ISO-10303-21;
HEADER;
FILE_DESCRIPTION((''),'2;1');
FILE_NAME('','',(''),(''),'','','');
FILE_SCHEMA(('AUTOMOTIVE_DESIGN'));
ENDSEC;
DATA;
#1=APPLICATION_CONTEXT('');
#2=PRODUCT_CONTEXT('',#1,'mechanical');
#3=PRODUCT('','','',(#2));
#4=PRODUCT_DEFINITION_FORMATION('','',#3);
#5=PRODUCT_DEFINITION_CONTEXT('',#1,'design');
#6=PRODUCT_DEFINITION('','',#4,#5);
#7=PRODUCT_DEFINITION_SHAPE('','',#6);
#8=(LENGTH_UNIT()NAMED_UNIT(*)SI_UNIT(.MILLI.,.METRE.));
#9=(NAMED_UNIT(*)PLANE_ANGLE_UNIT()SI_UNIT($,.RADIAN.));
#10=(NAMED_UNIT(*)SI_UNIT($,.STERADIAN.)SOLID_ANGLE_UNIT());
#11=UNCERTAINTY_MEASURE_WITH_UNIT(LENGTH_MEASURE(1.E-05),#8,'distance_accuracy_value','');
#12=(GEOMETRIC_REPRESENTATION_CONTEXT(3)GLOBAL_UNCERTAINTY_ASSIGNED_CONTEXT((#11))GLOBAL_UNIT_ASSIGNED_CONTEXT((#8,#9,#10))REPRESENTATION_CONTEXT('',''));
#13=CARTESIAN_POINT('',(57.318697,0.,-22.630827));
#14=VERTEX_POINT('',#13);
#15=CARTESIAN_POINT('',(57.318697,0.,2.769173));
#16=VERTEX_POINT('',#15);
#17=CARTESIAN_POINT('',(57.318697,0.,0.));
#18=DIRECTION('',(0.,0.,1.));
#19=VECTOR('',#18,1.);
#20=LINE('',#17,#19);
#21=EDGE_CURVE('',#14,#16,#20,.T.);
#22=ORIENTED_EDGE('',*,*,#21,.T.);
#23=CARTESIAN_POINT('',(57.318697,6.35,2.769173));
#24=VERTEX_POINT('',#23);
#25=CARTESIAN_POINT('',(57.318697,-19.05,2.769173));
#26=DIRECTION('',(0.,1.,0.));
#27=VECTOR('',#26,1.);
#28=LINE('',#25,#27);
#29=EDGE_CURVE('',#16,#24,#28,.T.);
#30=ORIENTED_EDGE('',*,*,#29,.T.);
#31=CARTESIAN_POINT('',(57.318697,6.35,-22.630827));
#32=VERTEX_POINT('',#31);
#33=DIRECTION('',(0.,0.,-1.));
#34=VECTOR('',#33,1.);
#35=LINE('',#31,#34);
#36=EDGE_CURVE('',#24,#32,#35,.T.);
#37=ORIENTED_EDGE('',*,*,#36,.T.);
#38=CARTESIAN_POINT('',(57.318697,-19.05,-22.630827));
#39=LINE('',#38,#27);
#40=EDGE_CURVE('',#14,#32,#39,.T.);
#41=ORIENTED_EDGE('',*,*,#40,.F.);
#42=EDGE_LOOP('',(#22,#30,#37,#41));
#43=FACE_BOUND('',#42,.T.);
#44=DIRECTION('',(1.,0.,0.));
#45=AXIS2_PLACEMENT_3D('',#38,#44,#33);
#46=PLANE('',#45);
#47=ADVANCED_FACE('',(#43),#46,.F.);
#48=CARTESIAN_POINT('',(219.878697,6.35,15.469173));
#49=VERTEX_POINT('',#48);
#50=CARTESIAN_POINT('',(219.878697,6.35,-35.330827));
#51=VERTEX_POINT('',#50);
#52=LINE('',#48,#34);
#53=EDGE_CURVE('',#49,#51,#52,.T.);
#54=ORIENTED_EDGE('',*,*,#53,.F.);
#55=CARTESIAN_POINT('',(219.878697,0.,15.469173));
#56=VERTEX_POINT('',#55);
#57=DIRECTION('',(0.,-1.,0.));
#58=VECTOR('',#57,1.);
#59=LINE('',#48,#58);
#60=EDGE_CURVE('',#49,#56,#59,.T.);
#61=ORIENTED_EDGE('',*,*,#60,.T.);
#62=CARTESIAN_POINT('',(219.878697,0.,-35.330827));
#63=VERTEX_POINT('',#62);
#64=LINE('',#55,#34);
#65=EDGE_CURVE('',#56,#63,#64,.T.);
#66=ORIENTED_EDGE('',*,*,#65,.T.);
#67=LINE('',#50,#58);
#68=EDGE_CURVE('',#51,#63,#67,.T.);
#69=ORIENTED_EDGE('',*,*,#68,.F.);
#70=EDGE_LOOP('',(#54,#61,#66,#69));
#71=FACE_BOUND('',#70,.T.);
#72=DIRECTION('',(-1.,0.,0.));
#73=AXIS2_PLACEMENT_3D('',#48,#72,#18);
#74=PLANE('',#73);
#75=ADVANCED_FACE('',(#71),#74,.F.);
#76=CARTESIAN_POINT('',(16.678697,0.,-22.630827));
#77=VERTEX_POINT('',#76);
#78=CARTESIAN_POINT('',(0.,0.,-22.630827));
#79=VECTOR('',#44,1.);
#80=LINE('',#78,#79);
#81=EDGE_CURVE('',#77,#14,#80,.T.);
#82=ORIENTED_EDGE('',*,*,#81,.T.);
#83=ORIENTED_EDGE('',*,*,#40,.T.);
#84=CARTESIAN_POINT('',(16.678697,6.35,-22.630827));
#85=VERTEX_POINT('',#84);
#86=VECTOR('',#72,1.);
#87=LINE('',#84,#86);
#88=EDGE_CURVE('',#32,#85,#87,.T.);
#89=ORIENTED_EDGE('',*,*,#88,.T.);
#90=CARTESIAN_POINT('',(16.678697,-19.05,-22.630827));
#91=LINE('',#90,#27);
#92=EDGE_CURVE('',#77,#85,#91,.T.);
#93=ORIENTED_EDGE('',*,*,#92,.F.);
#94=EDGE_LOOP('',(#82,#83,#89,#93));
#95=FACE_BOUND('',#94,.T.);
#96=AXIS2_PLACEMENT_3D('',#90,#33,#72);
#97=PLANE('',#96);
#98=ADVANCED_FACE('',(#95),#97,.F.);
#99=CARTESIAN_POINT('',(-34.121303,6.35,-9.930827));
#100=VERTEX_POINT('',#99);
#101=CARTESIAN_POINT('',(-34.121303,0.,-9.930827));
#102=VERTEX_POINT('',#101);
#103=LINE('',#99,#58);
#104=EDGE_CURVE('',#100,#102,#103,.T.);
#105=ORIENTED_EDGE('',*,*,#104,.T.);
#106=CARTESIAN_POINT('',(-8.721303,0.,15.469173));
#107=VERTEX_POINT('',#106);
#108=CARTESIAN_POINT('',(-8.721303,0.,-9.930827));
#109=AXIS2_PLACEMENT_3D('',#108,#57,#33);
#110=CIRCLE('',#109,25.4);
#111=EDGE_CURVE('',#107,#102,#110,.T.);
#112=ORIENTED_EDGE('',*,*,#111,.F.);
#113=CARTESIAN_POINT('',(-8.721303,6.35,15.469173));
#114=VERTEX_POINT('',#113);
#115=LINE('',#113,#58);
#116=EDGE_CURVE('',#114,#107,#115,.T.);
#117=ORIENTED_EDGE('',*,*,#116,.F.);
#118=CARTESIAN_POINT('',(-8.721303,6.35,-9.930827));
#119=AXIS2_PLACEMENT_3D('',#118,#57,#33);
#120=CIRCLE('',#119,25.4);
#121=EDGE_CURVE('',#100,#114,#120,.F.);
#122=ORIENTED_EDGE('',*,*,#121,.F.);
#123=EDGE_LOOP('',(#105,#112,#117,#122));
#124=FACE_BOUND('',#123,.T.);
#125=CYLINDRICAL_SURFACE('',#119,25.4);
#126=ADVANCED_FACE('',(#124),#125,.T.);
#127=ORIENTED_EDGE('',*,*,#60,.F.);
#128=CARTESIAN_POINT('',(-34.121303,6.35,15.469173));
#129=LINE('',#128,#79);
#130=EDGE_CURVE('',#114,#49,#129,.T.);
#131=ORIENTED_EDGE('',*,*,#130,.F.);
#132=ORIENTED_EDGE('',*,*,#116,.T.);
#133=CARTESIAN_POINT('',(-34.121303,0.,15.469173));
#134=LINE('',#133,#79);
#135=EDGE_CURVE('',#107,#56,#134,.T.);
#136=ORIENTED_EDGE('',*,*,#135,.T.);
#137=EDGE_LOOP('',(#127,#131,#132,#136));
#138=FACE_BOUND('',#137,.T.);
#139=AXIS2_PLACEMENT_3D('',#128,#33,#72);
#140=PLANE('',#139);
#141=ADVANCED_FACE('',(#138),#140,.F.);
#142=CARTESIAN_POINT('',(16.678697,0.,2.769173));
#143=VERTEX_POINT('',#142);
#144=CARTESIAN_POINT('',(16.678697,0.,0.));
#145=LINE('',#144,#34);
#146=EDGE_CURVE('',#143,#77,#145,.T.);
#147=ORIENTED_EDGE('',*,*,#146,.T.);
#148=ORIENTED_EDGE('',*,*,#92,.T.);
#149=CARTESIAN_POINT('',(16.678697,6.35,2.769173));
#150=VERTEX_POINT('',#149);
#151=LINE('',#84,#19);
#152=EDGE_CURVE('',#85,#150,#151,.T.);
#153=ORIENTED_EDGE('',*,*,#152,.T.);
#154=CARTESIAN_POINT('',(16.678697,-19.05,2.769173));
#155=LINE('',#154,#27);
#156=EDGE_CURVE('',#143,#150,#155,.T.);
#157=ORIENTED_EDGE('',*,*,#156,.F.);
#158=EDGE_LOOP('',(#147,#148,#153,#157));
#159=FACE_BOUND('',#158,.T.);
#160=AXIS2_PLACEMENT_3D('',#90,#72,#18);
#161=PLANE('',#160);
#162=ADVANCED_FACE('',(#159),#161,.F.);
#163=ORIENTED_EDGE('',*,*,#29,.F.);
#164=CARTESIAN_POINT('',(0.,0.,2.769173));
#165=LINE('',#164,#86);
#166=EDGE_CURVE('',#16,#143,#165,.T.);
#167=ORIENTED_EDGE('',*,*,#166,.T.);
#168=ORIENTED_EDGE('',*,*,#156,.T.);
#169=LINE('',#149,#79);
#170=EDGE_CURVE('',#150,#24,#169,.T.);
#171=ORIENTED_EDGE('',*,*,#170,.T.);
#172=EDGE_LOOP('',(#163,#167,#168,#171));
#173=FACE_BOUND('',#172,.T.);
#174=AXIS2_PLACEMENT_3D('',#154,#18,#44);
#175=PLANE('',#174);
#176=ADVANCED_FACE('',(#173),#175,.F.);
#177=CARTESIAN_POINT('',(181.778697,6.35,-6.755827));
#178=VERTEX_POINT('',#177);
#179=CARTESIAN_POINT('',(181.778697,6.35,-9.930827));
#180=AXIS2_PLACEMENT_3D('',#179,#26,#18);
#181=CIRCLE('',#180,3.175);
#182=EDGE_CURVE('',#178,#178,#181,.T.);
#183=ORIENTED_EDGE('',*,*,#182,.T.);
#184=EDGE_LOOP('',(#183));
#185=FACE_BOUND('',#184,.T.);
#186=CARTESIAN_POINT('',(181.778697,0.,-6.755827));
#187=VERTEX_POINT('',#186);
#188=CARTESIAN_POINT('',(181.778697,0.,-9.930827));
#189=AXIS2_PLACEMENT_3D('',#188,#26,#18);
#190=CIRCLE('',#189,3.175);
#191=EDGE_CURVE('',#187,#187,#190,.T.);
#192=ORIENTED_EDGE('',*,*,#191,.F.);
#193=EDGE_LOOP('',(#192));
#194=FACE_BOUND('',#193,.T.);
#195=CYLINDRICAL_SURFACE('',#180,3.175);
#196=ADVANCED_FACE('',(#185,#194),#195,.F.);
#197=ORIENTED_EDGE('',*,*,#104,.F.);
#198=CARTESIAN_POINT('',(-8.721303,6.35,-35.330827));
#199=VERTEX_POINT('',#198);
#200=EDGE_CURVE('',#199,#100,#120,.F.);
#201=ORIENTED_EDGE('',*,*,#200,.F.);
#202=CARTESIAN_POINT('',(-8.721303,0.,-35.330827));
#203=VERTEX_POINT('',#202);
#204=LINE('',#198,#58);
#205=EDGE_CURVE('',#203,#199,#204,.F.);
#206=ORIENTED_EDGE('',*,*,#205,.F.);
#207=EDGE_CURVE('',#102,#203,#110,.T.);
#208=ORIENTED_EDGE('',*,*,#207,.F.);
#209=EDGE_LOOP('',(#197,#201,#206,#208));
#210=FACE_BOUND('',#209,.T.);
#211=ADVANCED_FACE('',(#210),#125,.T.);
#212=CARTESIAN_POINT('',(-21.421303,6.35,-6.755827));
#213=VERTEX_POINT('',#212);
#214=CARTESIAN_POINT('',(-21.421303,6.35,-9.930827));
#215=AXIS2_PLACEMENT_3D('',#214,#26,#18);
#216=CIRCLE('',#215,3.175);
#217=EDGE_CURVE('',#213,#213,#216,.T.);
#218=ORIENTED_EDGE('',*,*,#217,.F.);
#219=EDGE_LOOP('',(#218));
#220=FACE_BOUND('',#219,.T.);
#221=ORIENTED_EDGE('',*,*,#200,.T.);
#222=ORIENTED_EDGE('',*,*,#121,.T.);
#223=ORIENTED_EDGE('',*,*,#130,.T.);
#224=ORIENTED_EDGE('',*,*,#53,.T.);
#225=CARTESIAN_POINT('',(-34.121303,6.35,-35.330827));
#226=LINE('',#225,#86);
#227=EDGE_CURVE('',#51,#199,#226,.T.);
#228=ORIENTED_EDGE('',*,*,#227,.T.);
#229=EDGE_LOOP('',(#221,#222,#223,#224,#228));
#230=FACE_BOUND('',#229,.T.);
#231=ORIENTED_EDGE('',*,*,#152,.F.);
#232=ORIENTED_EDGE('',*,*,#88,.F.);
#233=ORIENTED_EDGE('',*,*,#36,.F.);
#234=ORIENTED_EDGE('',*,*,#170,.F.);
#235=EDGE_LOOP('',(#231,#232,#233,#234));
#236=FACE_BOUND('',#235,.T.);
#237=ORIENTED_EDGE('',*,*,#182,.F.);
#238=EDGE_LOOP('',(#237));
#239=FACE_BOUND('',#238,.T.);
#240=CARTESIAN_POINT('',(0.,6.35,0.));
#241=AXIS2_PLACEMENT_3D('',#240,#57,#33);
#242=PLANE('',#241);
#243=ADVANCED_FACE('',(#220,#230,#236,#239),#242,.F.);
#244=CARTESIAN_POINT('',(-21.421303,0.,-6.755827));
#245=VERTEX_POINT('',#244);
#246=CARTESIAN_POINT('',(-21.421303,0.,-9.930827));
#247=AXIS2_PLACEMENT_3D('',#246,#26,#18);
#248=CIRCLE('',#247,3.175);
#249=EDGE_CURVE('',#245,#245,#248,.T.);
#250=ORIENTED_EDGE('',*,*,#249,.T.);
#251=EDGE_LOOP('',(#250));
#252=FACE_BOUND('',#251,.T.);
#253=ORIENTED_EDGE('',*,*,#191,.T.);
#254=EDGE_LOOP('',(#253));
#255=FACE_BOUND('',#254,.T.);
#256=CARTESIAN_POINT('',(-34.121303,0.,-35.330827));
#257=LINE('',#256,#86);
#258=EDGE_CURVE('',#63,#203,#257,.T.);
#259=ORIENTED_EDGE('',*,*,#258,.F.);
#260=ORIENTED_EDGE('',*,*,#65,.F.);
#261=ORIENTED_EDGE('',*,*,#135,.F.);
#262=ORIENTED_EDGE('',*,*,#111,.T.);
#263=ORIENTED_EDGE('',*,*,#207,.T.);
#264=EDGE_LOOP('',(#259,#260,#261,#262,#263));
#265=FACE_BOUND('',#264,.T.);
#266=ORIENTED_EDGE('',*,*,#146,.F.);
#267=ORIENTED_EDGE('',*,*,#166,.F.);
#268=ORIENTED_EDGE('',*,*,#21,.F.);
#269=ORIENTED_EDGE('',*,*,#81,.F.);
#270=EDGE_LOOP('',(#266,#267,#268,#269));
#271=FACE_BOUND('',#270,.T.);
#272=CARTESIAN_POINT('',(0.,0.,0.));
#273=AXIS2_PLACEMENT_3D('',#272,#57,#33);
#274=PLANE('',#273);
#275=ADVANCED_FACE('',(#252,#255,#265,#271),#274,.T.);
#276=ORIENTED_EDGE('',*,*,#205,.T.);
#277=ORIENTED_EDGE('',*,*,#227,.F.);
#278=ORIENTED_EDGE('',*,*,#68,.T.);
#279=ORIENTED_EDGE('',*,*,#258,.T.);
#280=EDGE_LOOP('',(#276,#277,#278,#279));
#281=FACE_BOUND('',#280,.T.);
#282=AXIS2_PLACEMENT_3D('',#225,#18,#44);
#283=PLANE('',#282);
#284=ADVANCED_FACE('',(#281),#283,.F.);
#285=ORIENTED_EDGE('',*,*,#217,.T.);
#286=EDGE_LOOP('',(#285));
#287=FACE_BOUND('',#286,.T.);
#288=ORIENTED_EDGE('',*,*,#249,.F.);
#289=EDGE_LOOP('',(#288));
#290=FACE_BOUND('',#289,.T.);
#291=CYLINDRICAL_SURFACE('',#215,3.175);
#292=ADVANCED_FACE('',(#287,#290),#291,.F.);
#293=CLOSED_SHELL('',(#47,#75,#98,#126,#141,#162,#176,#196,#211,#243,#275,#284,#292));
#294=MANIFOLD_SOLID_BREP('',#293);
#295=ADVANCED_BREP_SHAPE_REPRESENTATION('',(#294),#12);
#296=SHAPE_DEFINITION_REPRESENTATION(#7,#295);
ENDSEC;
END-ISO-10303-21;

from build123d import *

# Parameters (mm, degrees)
SKETCH1_W                   = 254
SKETCH1_H                   = 50.8
BOSS_EXTRUDE1_DEPTH         = 6.35
F_1_4_0_25_DIAMETER_HOLE1_D = 6.35
FILLET1_R                   = 25.4
SKETCH4_W                   = 40.64
SKETCH4_H                   = 25.4
CUT_EXTRUDE1_DEPTH          = 25.4


with BuildPart() as part:
    # Sketch1 → Boss-Extrude1 (new body)
    with BuildSketch(Plane(origin=(0, 0, 0), x_dir=(1, 0, 0), z_dir=(0, 1, 0))):
        with Locations((92.878696742, 9.930827068)):
            Rectangle(SKETCH1_W, SKETCH1_H)
    extrude(amount=BOSS_EXTRUDE1_DEPTH)

    # 1/4 (0.25) Diameter Hole1 (through all)
    with Locations(Plane(origin=(0, 6.35, 0), x_dir=(1, 0, 0), z_dir=(0, 1, 0))):
        with Locations((-21.421303258, 9.930827068), (181.778696742, 9.930827068)):
            Hole(F_1_4_0_25_DIAMETER_HOLE1_D / 2)

    # Fillet1
    fillet1_edges = [part.edges().sort_by_distance(p)[0] for p in [
        (-34.121303258, 3.175, 15.469172932),
        (-34.121303258, 3.175, -35.330827068),
    ]]
    fillet(fillet1_edges, radius=FILLET1_R - 0.0001)  # a hair under: the kernel refuses the full size

    # Sketch4 → Cut-Extrude1 (cut)
    with BuildSketch(Plane(origin=(0, 6.35, 0), x_dir=(1, 0, 0), z_dir=(0, 1, 0))):
        with Locations((36.998696742, 9.930827068)):
            Rectangle(SKETCH4_W, SKETCH4_H)
    extrude(amount=-CUT_EXTRUDE1_DEPTH, mode=Mode.SUBTRACT)


solid = part.part
